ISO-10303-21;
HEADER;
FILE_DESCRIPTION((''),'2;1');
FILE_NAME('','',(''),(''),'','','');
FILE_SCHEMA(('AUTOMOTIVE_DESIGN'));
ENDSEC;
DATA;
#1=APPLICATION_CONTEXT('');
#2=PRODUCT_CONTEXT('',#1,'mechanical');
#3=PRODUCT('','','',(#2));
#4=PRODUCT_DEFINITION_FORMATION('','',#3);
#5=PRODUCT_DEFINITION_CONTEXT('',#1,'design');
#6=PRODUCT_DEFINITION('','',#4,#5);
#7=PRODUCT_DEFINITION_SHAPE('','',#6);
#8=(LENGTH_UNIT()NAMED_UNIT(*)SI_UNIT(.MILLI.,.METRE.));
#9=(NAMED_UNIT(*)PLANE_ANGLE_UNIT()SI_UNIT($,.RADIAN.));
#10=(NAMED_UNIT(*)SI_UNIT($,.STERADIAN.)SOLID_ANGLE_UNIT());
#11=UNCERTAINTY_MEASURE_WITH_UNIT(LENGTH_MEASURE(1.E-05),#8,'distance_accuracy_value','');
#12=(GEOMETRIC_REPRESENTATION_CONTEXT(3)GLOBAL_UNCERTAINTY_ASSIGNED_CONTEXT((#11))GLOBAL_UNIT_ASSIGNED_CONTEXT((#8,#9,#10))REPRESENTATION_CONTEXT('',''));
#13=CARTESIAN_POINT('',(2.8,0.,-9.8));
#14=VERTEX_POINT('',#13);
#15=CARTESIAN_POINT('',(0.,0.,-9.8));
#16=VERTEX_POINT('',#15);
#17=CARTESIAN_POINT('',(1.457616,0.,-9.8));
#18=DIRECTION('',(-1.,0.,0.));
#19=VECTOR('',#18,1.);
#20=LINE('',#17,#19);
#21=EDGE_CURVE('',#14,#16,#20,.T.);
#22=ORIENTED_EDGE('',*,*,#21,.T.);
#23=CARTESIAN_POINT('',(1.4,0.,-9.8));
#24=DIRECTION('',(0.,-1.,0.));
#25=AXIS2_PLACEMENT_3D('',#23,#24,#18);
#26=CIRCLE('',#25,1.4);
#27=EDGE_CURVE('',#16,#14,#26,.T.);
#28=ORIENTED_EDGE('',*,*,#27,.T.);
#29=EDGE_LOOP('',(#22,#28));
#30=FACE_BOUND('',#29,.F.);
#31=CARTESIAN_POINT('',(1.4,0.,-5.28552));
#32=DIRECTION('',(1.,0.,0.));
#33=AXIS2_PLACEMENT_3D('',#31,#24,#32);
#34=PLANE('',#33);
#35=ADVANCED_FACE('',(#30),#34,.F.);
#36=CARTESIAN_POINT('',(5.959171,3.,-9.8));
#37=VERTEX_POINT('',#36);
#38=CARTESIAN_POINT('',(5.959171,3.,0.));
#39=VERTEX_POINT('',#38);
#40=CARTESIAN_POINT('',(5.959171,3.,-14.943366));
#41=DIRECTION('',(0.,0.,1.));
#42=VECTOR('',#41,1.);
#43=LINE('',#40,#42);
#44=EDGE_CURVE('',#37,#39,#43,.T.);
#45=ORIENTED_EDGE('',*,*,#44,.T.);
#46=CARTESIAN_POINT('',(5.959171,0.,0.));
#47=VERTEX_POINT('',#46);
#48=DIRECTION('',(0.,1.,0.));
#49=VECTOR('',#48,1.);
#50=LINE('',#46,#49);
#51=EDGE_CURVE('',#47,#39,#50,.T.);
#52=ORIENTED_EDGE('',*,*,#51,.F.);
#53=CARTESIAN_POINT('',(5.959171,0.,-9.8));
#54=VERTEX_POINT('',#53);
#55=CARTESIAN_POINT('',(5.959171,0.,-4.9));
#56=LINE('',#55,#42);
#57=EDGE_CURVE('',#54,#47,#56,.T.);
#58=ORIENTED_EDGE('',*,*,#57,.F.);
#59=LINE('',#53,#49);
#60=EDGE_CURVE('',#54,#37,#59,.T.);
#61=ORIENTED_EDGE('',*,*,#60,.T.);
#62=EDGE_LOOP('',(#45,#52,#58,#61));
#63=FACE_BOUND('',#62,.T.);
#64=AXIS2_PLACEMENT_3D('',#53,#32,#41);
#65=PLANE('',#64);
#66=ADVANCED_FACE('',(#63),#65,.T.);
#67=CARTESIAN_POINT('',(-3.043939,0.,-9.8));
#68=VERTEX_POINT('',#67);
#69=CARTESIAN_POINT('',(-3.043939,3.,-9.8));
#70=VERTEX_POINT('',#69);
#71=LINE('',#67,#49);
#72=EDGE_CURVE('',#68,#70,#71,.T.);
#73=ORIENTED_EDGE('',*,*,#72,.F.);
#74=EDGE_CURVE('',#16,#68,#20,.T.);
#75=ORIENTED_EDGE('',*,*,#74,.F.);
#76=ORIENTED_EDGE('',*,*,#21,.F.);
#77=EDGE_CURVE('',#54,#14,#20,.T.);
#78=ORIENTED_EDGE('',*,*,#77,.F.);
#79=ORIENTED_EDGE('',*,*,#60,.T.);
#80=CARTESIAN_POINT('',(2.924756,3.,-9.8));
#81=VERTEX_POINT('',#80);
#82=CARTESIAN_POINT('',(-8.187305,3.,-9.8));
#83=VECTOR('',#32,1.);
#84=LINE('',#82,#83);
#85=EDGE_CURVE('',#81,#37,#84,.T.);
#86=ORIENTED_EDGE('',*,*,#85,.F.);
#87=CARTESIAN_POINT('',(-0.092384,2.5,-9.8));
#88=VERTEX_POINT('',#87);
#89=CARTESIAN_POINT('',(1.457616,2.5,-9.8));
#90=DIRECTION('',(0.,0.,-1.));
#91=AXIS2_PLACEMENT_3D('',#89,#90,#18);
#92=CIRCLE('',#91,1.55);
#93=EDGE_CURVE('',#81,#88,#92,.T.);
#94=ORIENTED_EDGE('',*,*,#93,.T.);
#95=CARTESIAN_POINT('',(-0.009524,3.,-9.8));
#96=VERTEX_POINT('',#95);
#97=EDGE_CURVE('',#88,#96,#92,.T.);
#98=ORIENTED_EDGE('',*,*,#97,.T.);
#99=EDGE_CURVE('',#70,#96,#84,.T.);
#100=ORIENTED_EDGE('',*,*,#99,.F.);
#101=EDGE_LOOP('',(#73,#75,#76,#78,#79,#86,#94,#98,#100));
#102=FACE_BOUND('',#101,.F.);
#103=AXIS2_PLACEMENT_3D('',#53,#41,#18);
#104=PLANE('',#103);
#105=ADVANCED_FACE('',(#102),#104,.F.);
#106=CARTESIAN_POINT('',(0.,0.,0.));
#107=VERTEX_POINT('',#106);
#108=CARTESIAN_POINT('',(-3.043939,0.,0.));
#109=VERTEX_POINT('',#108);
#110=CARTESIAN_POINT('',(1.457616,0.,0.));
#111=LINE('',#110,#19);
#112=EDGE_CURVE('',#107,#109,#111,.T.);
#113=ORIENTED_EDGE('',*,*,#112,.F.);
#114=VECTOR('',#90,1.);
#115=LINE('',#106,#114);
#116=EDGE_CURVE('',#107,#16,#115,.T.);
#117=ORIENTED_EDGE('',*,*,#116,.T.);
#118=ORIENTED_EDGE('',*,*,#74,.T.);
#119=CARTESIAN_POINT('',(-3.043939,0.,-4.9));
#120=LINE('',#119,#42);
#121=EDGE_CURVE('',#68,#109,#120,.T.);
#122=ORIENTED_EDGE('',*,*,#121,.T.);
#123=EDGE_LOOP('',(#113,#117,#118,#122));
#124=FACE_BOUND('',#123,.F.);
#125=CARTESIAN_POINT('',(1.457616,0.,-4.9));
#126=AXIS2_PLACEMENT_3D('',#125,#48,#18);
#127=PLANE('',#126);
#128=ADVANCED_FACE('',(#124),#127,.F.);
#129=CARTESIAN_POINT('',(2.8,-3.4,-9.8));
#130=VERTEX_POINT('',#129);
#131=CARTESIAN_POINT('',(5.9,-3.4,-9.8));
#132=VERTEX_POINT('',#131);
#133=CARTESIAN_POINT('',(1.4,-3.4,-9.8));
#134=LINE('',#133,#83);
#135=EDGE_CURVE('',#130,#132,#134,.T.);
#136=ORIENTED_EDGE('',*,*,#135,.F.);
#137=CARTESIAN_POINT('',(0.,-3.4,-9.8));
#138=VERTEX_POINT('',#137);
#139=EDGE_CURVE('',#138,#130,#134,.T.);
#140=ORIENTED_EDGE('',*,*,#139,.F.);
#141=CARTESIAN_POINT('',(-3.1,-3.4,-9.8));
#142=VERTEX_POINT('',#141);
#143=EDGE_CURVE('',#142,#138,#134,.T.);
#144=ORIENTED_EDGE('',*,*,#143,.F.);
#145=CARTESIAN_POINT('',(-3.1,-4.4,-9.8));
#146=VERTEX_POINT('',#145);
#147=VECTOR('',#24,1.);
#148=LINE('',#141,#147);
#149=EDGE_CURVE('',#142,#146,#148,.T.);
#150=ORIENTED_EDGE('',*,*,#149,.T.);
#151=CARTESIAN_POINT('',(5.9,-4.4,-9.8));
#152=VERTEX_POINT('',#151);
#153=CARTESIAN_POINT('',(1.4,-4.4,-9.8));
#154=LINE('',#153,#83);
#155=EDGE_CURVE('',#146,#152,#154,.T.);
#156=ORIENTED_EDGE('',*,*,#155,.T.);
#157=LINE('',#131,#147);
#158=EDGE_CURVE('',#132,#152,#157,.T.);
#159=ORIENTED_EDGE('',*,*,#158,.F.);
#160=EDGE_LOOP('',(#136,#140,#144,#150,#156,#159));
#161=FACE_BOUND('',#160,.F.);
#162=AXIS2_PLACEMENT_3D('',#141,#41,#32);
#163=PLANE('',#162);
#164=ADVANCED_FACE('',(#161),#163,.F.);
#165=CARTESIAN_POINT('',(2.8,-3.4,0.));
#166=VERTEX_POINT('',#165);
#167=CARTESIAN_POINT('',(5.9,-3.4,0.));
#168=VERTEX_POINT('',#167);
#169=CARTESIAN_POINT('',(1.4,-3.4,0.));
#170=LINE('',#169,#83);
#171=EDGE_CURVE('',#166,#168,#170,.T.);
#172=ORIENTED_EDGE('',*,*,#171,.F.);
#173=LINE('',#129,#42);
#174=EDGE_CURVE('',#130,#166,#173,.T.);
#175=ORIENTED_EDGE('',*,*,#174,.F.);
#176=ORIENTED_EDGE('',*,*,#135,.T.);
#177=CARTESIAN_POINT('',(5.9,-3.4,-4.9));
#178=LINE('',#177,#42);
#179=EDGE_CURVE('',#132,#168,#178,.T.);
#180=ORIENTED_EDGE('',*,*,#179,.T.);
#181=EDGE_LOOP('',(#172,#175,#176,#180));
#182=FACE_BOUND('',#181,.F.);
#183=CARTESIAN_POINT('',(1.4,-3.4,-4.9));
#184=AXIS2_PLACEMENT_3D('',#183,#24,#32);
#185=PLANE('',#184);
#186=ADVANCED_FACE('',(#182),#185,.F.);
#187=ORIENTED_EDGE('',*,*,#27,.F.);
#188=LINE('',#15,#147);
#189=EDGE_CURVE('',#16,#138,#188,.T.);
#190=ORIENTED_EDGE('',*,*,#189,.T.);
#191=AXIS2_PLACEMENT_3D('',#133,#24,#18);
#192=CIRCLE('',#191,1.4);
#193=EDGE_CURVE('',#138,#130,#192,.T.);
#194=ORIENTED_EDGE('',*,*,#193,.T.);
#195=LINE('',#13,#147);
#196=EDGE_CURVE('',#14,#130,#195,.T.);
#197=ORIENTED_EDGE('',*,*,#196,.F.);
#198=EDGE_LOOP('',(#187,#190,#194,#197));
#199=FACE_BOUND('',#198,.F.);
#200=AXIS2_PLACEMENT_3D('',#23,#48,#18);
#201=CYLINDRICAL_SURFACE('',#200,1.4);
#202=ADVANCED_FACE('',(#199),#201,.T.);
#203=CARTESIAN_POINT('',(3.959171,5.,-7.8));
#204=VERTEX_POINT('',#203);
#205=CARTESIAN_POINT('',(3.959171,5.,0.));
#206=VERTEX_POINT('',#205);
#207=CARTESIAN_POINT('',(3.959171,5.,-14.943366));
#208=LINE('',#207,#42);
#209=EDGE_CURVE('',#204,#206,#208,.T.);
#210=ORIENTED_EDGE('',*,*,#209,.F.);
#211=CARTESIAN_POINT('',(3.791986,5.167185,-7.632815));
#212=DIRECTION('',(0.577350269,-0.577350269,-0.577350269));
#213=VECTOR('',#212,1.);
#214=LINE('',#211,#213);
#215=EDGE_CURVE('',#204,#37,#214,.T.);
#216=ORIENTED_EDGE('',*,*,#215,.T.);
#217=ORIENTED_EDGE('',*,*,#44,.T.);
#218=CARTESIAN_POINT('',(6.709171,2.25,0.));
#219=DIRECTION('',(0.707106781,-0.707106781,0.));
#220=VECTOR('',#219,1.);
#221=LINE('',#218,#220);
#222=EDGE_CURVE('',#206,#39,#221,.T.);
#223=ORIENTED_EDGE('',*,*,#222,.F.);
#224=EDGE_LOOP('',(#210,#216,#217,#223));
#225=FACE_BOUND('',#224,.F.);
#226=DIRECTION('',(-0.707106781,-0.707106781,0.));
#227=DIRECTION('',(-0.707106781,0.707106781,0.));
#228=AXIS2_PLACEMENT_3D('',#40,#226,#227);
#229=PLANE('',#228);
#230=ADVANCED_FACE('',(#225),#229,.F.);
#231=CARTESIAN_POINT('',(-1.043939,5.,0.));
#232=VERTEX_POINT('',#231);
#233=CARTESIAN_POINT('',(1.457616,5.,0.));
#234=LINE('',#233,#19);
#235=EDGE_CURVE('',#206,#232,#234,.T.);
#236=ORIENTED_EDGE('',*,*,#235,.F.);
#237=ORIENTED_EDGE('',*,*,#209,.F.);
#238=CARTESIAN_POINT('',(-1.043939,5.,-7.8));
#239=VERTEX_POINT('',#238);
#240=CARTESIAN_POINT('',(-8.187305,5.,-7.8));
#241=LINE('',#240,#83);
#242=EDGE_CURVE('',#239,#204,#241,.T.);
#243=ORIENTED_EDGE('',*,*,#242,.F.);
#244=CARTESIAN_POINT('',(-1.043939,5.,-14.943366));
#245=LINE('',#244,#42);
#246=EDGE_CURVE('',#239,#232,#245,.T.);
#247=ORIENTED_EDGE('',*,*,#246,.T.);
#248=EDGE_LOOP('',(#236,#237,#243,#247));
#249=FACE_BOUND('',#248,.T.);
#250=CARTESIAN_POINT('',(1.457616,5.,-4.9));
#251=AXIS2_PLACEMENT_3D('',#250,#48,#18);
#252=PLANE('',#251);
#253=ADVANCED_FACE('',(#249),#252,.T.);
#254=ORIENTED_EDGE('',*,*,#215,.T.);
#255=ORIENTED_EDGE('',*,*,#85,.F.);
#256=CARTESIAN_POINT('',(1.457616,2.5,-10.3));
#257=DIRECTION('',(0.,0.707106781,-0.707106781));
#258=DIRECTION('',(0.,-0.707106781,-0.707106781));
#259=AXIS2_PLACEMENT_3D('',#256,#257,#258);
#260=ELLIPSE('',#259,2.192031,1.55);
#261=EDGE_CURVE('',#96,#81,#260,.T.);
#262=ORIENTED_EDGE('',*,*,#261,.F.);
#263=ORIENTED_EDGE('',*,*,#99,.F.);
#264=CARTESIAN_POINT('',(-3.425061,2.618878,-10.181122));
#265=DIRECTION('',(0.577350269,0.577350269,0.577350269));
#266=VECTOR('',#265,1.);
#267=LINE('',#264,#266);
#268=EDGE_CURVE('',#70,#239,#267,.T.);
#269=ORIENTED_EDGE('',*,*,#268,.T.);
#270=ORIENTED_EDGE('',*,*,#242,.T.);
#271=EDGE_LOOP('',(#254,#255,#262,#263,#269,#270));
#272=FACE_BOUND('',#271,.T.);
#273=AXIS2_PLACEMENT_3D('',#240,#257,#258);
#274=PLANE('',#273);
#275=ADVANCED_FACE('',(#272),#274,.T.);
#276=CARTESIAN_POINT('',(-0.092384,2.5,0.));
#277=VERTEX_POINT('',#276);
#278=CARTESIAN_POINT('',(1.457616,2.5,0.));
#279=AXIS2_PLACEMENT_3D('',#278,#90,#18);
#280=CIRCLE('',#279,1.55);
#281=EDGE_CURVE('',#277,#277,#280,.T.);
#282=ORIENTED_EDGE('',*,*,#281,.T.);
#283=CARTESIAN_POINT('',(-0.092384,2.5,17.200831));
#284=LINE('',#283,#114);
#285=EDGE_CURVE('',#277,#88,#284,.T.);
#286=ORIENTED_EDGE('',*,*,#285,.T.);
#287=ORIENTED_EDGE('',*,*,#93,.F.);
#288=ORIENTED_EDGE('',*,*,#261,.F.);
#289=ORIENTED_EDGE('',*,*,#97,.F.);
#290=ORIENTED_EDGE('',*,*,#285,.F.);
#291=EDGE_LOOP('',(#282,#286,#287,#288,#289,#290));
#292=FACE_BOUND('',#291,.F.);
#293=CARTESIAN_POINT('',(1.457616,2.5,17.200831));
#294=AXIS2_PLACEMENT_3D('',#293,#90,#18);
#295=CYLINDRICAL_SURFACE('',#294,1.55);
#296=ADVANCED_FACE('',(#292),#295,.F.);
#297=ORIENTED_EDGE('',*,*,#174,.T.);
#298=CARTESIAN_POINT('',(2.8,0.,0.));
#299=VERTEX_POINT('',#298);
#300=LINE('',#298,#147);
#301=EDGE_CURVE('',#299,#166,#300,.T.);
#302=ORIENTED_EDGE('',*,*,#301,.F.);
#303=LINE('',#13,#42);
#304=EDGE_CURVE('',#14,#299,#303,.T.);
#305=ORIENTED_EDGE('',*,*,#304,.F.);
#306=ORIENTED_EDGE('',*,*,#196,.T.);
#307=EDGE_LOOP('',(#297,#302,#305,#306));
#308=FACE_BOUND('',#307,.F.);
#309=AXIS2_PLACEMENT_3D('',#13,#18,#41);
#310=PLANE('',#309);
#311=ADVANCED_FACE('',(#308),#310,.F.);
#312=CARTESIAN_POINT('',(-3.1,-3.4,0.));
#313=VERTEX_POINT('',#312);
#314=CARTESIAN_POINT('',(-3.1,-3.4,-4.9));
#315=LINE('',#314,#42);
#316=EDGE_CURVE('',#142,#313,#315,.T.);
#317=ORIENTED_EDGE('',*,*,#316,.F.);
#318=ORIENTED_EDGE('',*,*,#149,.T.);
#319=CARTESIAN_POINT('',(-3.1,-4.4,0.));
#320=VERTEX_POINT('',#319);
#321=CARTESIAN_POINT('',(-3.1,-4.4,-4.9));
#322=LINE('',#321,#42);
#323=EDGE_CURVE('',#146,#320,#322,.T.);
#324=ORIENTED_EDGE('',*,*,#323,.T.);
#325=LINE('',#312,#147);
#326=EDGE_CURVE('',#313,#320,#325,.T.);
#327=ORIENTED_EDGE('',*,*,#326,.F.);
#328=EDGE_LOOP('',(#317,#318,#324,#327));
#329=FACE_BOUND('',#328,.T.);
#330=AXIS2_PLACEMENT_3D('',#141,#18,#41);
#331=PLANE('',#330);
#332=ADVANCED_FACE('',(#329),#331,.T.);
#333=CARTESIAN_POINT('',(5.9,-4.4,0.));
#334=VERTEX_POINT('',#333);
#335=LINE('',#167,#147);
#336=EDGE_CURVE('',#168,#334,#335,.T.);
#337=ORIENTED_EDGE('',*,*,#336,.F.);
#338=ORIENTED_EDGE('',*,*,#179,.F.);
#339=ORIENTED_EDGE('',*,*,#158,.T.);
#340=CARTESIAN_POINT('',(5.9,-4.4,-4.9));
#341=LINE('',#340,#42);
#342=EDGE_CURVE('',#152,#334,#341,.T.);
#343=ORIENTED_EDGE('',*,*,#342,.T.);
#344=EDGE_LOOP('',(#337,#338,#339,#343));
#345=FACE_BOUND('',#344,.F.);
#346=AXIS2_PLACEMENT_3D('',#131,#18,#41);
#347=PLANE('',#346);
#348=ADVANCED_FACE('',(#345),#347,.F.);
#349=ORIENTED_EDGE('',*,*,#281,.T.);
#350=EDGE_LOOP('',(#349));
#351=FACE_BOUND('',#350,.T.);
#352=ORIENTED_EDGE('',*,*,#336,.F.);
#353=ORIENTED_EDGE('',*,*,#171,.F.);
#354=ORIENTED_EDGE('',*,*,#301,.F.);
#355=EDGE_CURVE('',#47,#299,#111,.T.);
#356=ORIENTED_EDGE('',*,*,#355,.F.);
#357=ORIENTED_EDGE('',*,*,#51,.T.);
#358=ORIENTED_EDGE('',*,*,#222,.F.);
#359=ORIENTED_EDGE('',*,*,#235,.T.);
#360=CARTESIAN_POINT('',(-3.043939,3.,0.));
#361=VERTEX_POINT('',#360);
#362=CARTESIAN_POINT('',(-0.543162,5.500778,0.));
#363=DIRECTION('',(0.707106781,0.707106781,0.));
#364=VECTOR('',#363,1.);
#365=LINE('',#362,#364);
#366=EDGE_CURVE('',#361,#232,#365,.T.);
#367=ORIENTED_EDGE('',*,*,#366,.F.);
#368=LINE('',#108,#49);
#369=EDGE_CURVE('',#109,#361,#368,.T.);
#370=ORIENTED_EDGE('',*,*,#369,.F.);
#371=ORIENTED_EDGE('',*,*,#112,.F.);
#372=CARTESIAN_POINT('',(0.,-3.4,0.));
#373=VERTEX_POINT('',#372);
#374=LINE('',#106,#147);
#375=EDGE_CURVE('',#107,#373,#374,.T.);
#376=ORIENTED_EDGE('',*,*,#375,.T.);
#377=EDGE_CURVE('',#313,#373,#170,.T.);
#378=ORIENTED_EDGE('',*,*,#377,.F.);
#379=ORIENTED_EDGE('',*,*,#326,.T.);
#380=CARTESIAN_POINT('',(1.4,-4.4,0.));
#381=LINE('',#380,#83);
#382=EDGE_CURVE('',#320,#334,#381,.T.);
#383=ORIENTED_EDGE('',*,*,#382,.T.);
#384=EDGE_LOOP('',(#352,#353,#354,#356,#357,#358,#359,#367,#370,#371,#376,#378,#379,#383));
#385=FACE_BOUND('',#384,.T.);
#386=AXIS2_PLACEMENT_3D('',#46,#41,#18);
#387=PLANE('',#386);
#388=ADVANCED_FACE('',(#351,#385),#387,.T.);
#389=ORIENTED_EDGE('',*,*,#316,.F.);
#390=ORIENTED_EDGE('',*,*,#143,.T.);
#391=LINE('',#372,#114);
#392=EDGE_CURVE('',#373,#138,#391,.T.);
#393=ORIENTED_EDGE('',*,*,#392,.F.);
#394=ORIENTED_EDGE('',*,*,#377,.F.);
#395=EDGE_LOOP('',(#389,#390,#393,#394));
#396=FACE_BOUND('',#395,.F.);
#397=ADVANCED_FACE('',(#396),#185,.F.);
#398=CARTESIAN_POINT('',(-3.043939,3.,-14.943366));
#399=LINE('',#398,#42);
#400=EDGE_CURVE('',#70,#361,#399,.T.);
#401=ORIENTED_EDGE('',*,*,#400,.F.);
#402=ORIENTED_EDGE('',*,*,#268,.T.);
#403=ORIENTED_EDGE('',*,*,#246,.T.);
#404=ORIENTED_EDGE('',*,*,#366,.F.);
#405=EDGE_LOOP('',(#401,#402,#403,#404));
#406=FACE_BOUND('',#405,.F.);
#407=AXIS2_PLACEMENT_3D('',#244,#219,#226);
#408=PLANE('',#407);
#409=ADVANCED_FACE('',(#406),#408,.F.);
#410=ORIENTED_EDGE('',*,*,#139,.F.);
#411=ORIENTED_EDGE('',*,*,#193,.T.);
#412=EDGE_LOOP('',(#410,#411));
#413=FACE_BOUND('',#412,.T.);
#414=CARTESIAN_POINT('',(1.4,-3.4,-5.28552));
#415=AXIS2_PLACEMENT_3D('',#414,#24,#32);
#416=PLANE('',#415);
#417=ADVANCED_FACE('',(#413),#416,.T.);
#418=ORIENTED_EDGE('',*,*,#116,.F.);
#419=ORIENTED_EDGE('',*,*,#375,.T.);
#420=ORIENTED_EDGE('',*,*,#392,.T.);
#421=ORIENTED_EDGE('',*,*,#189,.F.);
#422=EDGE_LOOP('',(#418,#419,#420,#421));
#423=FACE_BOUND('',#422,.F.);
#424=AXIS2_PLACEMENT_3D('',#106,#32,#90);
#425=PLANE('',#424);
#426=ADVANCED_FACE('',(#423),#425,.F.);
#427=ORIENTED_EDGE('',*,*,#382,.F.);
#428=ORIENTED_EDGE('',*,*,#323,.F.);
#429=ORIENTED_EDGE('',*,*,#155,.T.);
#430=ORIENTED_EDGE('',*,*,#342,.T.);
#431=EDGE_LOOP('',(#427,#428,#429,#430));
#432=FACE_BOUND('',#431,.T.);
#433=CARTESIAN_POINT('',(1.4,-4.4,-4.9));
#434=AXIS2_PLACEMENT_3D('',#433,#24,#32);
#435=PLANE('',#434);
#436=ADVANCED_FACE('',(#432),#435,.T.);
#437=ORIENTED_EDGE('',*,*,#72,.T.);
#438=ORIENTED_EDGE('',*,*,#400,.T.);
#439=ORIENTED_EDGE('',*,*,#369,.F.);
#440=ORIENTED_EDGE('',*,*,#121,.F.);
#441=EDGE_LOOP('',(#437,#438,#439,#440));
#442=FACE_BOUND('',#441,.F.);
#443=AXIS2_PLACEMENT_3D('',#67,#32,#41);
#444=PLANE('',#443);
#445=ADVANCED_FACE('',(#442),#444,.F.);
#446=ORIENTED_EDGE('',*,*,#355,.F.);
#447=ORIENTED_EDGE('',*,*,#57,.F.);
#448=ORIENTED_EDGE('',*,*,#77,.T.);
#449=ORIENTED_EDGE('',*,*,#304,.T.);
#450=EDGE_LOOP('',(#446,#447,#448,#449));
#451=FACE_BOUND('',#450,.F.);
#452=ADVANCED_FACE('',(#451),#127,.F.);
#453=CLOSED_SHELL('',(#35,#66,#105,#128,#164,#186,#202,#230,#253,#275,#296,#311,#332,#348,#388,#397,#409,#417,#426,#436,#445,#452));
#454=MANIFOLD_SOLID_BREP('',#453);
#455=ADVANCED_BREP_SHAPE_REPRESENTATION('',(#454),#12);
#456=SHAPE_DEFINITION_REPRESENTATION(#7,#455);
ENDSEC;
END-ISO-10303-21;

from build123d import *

# Parameters (mm, degrees)
F1_DEPTH    = 3.4
F2_W        = 9
F2_H        = 9.8
F3_DEPTH    = 1
F4_W        = 9.0031104628
F4_H        = 9.8
F5_DEPTH    = 5
F7_D        = 3.1
F8_T1_DEPTH = 20.0867319519
F8_T3_DEPTH = 19.2898424147


# Not quite as in the source:
# - a fillet or chamfer that OpenCascade refuses, or shapes differently, is made with other operations: its cross-section is extruded or revolved along the edge and cut away or added


with BuildPart() as f1:
    # F0 (on Front) → F1 (new body)
    with BuildSketch(Plane.XZ):
        with BuildLine():
            Line((2.8, 0), (0, 0))
            Line((0, 0), (0, -9.8))
            ThreePointArc((0, -9.8), (1.4, -11.2), (2.8, -9.8))
            Line((2.8, -9.8), (2.8, 0))
        make_face()
    extrude(amount=F1_DEPTH)

    # F2 (on face) → F3 (join)
    with BuildSketch(Plane.XZ.offset(3.4)):
        with Locations((1.4, -4.9)):
            Rectangle(F2_W, F2_H)
    extrude(amount=F3_DEPTH)

    # F4 (on face) → F5 (join)
    with BuildSketch(Plane(origin=(0, 0, 0), x_dir=(-1, 0, 0), z_dir=(0, 1, 0))):
        with Locations((-1.4576160967, -4.9)):
            Rectangle(F4_W, F4_H)
    extrude(amount=F5_DEPTH)

    # F7 (through all)
    with Locations(Plane.XY):
        with Locations((1.4576160967, 2.5)):
            Hole(F7_D / 2)

    # F8: chamfer of 2 on 3 edges, made by hand

    # F8_s2 → F8_t1 (cut)
    with BuildSketch(Plane.XY.offset(-14.9433659759)):
        Polygon((-1.0439391347, 5), (-3.0439391347, 3), (-3.0439391347, 5), align=None)
        Polygon((5.9591713281, 3), (3.9591713281, 5), (5.9591713281, 5), align=None)
    extrude(amount=F8_T1_DEPTH, mode=Mode.SUBTRACT)

    # F8_s4 → F8_t3 (cut)
    with BuildSketch(Plane.YZ.offset(-8.1873051107)):
        Polygon((5, -7.8), (3, -9.8), (5, -9.8), align=None)
    extrude(amount=F8_T3_DEPTH, mode=Mode.SUBTRACT)


solid = f1.part
